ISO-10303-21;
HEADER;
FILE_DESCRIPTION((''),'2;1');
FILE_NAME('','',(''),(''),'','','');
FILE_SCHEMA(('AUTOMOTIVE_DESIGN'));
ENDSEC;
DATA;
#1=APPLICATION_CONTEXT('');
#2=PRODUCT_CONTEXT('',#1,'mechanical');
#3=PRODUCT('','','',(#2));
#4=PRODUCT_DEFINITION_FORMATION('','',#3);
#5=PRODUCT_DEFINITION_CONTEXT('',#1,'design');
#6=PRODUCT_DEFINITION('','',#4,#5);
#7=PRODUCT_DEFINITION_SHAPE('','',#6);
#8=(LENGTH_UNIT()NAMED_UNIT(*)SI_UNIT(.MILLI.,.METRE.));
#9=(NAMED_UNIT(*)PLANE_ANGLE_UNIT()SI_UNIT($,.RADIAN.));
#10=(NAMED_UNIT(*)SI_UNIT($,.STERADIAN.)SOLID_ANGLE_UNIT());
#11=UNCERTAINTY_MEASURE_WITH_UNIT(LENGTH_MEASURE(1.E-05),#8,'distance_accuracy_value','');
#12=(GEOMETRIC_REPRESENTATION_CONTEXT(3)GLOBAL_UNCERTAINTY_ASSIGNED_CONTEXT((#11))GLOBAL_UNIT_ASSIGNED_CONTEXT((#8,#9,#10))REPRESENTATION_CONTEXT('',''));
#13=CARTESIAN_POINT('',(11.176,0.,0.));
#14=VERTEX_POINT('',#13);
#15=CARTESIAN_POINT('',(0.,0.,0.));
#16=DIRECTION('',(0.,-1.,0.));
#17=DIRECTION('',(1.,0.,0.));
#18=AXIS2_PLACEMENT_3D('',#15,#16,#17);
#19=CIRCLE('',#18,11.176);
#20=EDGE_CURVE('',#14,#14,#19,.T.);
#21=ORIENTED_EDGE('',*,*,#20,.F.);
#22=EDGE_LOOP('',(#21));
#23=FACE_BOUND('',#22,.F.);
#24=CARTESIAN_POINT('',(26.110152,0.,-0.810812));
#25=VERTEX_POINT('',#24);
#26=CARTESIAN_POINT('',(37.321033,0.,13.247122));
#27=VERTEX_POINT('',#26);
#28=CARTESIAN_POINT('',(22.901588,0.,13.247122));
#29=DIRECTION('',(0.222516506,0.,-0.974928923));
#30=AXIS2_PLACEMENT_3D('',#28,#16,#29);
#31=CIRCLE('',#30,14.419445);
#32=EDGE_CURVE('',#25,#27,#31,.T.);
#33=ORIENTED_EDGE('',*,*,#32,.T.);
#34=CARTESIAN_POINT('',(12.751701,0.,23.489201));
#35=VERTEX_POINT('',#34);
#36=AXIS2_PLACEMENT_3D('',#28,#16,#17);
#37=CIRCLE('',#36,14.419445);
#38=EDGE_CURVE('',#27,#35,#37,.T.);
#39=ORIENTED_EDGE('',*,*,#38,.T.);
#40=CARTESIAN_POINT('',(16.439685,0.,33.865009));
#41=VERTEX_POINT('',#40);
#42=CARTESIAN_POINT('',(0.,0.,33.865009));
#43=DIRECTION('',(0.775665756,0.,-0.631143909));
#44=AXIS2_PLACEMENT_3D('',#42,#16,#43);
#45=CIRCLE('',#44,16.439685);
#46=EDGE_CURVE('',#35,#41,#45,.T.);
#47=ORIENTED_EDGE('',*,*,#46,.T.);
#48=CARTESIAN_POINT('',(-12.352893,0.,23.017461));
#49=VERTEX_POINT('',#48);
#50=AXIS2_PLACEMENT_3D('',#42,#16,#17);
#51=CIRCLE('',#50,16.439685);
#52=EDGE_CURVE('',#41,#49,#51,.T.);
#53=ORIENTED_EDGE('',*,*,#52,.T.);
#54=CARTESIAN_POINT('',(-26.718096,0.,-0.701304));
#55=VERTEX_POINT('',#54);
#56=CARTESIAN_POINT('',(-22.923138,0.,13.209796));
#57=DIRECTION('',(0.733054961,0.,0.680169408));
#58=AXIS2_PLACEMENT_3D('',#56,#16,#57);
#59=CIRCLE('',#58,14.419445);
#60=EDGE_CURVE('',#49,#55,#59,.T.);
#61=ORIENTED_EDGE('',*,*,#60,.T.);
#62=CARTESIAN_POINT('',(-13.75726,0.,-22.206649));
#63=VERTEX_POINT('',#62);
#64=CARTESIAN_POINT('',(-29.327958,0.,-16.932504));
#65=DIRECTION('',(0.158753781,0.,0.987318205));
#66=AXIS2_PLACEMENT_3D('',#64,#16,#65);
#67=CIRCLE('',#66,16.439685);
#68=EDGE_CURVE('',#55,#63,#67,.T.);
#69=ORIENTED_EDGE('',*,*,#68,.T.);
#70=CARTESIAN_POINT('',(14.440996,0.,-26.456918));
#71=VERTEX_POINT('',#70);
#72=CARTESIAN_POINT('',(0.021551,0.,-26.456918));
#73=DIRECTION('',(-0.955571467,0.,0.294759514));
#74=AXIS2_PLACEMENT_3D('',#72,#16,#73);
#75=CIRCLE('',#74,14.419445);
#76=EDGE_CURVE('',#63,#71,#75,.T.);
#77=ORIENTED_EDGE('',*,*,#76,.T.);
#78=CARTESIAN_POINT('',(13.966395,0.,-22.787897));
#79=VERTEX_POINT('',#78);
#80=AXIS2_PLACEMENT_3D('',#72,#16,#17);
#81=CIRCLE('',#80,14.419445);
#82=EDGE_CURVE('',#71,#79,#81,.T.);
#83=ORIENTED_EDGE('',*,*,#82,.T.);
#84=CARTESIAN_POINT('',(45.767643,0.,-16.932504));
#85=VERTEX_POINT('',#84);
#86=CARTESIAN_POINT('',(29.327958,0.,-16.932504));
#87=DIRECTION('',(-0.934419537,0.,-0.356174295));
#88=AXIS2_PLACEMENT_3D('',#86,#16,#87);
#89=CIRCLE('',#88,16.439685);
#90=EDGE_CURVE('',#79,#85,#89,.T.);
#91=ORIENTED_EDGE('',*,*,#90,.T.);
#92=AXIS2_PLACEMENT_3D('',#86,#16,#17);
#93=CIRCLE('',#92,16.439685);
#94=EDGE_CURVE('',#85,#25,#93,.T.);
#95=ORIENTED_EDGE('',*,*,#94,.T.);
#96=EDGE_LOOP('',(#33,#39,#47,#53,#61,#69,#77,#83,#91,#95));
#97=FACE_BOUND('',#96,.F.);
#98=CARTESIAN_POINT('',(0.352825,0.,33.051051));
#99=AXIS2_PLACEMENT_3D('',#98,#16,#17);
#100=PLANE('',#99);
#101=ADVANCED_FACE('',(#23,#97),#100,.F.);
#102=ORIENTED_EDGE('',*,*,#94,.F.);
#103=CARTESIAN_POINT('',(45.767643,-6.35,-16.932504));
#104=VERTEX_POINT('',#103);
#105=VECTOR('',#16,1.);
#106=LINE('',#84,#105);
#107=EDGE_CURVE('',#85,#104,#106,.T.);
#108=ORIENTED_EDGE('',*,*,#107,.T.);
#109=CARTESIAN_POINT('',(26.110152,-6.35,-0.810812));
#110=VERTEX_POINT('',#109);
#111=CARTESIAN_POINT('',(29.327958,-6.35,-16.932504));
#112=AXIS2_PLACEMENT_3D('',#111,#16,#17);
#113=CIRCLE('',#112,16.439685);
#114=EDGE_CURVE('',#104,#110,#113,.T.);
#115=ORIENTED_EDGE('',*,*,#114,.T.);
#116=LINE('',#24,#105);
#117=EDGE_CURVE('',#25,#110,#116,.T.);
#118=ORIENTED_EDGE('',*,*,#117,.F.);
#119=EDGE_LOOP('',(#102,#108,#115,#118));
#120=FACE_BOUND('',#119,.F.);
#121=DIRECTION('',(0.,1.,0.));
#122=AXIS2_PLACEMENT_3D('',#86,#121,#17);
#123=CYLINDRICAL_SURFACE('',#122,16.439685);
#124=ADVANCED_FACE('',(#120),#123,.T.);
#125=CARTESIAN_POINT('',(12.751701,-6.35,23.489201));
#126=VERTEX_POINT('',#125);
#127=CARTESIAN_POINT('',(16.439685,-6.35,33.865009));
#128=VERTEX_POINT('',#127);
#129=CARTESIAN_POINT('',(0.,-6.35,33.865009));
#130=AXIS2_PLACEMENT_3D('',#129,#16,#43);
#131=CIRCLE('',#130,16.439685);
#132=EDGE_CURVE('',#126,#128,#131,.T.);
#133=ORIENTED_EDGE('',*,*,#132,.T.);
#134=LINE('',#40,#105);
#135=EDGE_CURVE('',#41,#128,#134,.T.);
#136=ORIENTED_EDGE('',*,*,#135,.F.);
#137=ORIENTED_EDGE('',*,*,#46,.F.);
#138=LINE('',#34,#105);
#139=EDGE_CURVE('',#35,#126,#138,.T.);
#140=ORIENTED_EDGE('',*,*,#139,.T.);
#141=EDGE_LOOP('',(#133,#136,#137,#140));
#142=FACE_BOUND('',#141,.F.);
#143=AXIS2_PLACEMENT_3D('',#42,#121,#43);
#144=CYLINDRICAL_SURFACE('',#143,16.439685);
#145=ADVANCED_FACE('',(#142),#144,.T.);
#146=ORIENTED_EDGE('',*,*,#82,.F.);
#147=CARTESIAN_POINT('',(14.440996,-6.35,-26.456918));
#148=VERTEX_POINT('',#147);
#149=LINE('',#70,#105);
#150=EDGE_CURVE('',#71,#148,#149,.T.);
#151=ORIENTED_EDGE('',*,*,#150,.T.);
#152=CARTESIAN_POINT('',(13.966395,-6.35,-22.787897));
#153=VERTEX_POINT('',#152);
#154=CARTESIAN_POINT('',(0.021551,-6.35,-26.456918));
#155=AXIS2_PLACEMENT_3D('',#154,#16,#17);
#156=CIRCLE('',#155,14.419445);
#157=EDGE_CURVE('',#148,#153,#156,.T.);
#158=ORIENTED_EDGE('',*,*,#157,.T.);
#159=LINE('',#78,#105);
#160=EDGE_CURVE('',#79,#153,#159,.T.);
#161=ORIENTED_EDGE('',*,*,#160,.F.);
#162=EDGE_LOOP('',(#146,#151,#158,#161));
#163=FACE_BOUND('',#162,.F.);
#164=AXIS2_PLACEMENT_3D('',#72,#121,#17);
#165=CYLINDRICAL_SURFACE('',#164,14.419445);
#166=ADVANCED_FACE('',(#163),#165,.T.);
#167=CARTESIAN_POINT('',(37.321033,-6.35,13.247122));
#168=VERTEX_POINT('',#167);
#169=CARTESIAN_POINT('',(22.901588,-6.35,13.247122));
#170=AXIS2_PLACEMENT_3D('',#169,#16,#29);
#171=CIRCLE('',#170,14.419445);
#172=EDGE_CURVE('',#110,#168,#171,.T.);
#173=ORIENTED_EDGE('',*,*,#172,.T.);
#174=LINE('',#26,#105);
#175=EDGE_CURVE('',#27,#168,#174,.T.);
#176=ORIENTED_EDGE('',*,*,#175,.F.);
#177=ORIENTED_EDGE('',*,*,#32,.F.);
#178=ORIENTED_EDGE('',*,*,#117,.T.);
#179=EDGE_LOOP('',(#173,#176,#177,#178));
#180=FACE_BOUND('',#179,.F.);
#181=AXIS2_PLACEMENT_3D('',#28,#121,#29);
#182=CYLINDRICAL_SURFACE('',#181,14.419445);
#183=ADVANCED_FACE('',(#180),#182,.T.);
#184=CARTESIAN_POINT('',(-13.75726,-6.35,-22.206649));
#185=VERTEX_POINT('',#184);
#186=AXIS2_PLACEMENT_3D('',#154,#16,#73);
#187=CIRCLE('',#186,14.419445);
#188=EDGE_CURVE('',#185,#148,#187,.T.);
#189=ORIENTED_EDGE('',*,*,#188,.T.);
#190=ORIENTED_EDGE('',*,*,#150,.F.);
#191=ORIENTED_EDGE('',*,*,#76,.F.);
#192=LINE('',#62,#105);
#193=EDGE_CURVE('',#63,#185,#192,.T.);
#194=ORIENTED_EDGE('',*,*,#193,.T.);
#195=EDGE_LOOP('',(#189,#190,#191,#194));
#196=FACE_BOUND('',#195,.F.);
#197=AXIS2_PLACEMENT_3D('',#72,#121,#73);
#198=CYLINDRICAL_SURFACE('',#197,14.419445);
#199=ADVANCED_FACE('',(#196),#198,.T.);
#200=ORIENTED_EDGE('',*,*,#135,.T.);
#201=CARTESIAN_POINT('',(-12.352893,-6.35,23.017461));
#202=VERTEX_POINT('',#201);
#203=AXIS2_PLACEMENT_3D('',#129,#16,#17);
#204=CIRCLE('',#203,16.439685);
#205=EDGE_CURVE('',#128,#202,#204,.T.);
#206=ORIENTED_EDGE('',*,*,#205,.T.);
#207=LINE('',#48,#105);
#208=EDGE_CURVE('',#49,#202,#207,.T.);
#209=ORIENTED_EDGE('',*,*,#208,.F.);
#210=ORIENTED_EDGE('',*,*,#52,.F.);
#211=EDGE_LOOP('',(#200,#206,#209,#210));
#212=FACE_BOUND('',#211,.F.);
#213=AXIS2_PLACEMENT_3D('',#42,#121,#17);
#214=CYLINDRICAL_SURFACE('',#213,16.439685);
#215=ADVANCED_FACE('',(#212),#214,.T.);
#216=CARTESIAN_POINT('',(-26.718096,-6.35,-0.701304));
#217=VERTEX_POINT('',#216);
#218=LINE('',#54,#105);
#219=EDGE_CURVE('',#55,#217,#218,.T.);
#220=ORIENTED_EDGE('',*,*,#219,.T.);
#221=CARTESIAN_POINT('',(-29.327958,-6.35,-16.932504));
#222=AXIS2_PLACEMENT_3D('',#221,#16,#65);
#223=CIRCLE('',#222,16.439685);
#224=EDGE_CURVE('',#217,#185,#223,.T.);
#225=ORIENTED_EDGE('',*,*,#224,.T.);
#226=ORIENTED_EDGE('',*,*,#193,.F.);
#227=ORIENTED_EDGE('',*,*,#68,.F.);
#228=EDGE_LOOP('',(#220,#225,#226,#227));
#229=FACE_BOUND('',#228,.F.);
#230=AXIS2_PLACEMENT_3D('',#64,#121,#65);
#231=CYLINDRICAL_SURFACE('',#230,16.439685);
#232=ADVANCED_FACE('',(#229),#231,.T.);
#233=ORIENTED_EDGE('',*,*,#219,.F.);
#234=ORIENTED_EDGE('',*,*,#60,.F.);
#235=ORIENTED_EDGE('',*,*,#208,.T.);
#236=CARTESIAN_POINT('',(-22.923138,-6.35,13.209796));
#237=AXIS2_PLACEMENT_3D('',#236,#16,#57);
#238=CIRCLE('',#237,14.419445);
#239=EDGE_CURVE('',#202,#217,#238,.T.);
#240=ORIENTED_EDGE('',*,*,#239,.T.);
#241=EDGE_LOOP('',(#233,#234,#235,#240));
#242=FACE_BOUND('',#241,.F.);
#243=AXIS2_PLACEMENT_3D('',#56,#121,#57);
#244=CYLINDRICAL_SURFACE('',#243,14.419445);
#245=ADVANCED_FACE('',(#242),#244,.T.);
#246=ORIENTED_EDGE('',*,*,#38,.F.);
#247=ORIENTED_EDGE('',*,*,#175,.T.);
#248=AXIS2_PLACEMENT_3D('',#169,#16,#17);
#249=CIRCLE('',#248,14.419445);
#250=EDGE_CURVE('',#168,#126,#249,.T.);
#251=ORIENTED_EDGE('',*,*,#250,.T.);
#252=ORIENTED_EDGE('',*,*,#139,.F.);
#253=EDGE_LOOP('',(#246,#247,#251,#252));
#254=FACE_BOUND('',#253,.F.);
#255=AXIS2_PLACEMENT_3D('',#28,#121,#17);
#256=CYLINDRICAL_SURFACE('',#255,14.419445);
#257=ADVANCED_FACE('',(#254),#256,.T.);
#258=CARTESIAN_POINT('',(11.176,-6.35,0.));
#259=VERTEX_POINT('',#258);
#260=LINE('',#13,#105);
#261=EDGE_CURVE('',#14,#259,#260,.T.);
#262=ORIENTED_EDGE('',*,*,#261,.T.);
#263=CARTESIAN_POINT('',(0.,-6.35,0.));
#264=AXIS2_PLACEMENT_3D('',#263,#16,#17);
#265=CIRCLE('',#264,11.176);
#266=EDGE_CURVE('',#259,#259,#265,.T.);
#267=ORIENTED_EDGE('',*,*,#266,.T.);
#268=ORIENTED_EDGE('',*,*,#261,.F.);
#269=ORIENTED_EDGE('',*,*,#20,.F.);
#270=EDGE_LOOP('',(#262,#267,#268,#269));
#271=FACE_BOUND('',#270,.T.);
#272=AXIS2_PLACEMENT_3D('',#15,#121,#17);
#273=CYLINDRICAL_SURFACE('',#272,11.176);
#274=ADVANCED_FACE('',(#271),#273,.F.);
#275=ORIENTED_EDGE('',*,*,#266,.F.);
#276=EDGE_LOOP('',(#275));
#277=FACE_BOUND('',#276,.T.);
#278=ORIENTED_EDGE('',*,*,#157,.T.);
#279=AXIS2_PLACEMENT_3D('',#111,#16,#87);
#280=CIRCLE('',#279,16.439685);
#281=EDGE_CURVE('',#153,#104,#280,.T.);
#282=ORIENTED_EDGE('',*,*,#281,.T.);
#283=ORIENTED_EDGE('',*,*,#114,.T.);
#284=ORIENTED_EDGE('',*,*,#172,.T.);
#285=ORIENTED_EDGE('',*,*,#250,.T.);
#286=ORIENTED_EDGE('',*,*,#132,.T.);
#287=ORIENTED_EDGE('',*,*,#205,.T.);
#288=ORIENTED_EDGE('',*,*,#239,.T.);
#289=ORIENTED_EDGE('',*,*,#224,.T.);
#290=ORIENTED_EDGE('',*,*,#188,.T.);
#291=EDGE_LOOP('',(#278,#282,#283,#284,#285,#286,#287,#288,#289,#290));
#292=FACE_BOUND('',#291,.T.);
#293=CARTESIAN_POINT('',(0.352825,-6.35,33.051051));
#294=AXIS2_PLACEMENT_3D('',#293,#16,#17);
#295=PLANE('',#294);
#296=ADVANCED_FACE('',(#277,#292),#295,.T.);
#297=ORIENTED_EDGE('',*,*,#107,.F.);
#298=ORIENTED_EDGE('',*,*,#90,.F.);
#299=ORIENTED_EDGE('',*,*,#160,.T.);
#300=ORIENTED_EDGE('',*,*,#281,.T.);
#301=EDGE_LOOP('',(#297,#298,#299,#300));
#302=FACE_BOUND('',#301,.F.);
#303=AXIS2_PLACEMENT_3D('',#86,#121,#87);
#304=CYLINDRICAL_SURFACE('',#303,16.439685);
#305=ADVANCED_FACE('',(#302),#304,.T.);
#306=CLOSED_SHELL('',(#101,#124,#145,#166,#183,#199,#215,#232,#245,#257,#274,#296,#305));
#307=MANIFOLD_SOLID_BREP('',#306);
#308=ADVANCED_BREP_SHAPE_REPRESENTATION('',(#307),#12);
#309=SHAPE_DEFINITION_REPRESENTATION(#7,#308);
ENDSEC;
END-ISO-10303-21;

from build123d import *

# Parameters (mm, degrees)
F0_R     = 11.176
F1_DEPTH = 6.35


with BuildPart() as f1:
    # F0 (on Front) → F1 (new body)
    with BuildSketch(Plane.XZ):
        with BuildLine():
            ThreePointArc((12.7517006508, 23.4892014836), (15.490274076, 28.359134381), (16.4396849361, 33.8650085032))
            ThreePointArc((16.4396849361, 33.8650085032), (-5.7959286408, 49.2491058764), (-12.3528926478, 23.0174611293))
            ThreePointArc((-12.3528926478, 23.0174611293), (-12.2109180853, 22.8621908621), (-12.0712241226, 22.7048656287))
            ThreePointArc((-12.0712241226, 22.7048656287), (-0.3017671927, 17.4280934228), (11.6534468913, 22.2693016964))
            ThreePointArc((11.6534468913, 22.2693016964), (12.1852012792, 22.8948917308), (12.7517006508, 23.4892014836))
        make_face()
        with BuildLine():
            ThreePointArc((-12.0712241226, 22.7048656287), (-12.2109180853, 22.8621908621), (-12.3528926478, 23.0174611293))
            ThreePointArc((-12.3528926478, 23.0174611293), (-12.2130585437, 22.8602621723), (-12.0712241226, 22.7048656287))
        make_face()
        with BuildLine():
            ThreePointArc((-12.0712241226, 22.7048656287), (-12.2130585437, 22.8602621723), (-12.3528926478, 23.0174611293))
            ThreePointArc((-12.3528926478, 23.0174611293), (-35.2568762282, 20.6796890684), (-26.7180955248, -0.7013040367))
            ThreePointArc((-26.7180955248, -0.7013040367), (-25.9110393194, -0.8518354275), (-25.1125044392, -1.0424697987))
            ThreePointArc((-25.1125044392, -1.0424697987), (-13.5329586121, 2.2669935247), (-8.5036933239, 13.2097957122))
            ThreePointArc((-8.5036933239, 13.2097957122), (-9.4250093039, 18.2813740839), (-12.0712241226, 22.7048656287))
        make_face()
        with BuildLine():
            ThreePointArc((37.321032921, 13.2471223209), (28.4497702153, 26.5564449349), (12.7517006508, 23.4892014836))
            ThreePointArc((12.7517006508, 23.4892014836), (12.2178085396, 22.8655360028), (11.6534468913, 22.2693016964))
            ThreePointArc((11.6534468913, 22.2693016964), (10.5710761807, 5.7719047545), (25.6986024853, -0.8984460694))
            ThreePointArc((25.6986024853, -0.8984460694), (25.9040970502, -0.8533121295), (26.1101523925, -0.8108117214))
            ThreePointArc((26.1101523925, -0.8108117214), (34.1751435518, 4.2567197748), (37.321032921, 13.2471223209))
        make_face()
        with BuildLine():
            ThreePointArc((11.6534468913, 22.2693016964), (12.2178085396, 22.8655360028), (12.7517006508, 23.4892014836))
            ThreePointArc((12.7517006508, 23.4892014836), (12.1852012792, 22.8948917308), (11.6534468913, 22.2693016964))
        make_face()
        with BuildLine():
            ThreePointArc((-25.1125044392, -1.0424697987), (-25.9201584954, -0.8947520073), (-26.7180955248, -0.7013040367))
            ThreePointArc((-26.7180955248, -0.7013040367), (-43.4081977491, -25.41837957), (-13.7572597447, -22.2066494078))
            ThreePointArc((-13.7572597447, -22.2066494078), (-13.6937790301, -22.0060606965), (-13.6273783627, -21.8064195594))
            ThreePointArc((-13.6273783627, -21.8064195594), (-13.0740993856, -19.3973230871), (-12.8882727271, -16.9325042516))
            ThreePointArc((-12.8882727271, -16.9325042516), (-16.2979161501, -6.9084701851), (-25.1125044392, -1.0424697987))
        make_face()
        with BuildLine():
            ThreePointArc((-25.1125044392, -1.0424697987), (-25.9110393194, -0.8518354275), (-26.7180955248, -0.7013040367))
            ThreePointArc((-26.7180955248, -0.7013040367), (-25.9201584954, -0.8947520073), (-25.1125044392, -1.0424697987))
        make_face()
        with BuildLine():
            ThreePointArc((-13.6273783627, -21.8064195594), (-13.6937790301, -22.0060606965), (-13.7572597447, -22.2066494078))
            ThreePointArc((-13.7572597447, -22.2066494078), (-13.6910385066, -22.0069500429), (-13.6273783627, -21.8064195594))
        make_face()
        with BuildLine():
            ThreePointArc((-13.6273783627, -21.8064195594), (-13.6910385066, -22.0069500429), (-13.7572597447, -22.2066494078))
            ThreePointArc((-13.7572597447, -22.2066494078), (-2.127588621, -40.7153049273), (14.44099559, -26.4569180331))
            ThreePointArc((14.44099559, -26.4569180331), (14.3218531968, -24.6071235917), (13.966394874, -22.7878974469))
            ThreePointArc((13.966394874, -22.7878974469), (13.6932307798, -22.0137005753), (13.459057548, -21.2268318977))
            ThreePointArc((13.459057548, -21.2268318977), (-0.2869219447, -12.0407728951), (-13.6273783627, -21.8064195594))
        make_face()
        with BuildLine():
            ThreePointArc((26.1101523925, -0.8108117214), (25.9046971154, -0.8561301656), (25.6986024853, -0.8984460694))
            ThreePointArc((25.6986024853, -0.8984460694), (15.24405524, -8.4527086566), (13.459057548, -21.2268318977))
            ThreePointArc((13.459057548, -21.2268318977), (13.7349572161, -22.0001397234), (13.966394874, -22.7878974469))
            ThreePointArc((13.966394874, -22.7878974469), (32.3048678413, -33.100412174), (45.7676425992, -16.9325042516))
            ThreePointArc((45.7676425992, -16.9325042516), (39.7530124822, -4.2210341235), (26.1101523925, -0.8108117214))
        make_face()
        with BuildLine():
            ThreePointArc((26.1101523925, -0.8108117214), (25.9040970502, -0.8533121295), (25.6986024853, -0.8984460694))
            ThreePointArc((25.6986024853, -0.8984460694), (25.9046971154, -0.8561301656), (26.1101523925, -0.8108117214))
        make_face()
        with BuildLine():
            ThreePointArc((13.966394874, -22.7878974469), (13.7349572161, -22.0001397234), (13.459057548, -21.2268318977))
            ThreePointArc((13.459057548, -21.2268318977), (13.6932307798, -22.0137005753), (13.966394874, -22.7878974469))
        make_face()
        with BuildLine():
            ThreePointArc((11.6534468913, 22.2693016964), (-0.3017671927, 17.4280934228), (-12.0712241226, 22.7048656287))
            ThreePointArc((-12.0712241226, 22.7048656287), (-9.4250093039, 18.2813740839), (-8.5036933239, 13.2097957122))
            ThreePointArc((-8.5036933239, 13.2097957122), (-13.5329586121, 2.2669935247), (-25.1125044392, -1.0424697987))
            ThreePointArc((-25.1125044392, -1.0424697987), (-16.2979161501, -6.9084701851), (-12.8882727271, -16.9325042516))
            ThreePointArc((-12.8882727271, -16.9325042516), (-13.0740993856, -19.3973230871), (-13.6273783627, -21.8064195594))
            ThreePointArc((-13.6273783627, -21.8064195594), (-0.2869219447, -12.0407728951), (13.459057548, -21.2268318977))
            ThreePointArc((13.459057548, -21.2268318977), (15.24405524, -8.4527086566), (25.6986024853, -0.8984460694))
            ThreePointArc((25.6986024853, -0.8984460694), (10.5710761807, 5.7719047545), (11.6534468913, 22.2693016964))
        make_face()
        Circle(F0_R, mode=Mode.SUBTRACT)
    extrude(amount=F1_DEPTH)


solid = f1.part
